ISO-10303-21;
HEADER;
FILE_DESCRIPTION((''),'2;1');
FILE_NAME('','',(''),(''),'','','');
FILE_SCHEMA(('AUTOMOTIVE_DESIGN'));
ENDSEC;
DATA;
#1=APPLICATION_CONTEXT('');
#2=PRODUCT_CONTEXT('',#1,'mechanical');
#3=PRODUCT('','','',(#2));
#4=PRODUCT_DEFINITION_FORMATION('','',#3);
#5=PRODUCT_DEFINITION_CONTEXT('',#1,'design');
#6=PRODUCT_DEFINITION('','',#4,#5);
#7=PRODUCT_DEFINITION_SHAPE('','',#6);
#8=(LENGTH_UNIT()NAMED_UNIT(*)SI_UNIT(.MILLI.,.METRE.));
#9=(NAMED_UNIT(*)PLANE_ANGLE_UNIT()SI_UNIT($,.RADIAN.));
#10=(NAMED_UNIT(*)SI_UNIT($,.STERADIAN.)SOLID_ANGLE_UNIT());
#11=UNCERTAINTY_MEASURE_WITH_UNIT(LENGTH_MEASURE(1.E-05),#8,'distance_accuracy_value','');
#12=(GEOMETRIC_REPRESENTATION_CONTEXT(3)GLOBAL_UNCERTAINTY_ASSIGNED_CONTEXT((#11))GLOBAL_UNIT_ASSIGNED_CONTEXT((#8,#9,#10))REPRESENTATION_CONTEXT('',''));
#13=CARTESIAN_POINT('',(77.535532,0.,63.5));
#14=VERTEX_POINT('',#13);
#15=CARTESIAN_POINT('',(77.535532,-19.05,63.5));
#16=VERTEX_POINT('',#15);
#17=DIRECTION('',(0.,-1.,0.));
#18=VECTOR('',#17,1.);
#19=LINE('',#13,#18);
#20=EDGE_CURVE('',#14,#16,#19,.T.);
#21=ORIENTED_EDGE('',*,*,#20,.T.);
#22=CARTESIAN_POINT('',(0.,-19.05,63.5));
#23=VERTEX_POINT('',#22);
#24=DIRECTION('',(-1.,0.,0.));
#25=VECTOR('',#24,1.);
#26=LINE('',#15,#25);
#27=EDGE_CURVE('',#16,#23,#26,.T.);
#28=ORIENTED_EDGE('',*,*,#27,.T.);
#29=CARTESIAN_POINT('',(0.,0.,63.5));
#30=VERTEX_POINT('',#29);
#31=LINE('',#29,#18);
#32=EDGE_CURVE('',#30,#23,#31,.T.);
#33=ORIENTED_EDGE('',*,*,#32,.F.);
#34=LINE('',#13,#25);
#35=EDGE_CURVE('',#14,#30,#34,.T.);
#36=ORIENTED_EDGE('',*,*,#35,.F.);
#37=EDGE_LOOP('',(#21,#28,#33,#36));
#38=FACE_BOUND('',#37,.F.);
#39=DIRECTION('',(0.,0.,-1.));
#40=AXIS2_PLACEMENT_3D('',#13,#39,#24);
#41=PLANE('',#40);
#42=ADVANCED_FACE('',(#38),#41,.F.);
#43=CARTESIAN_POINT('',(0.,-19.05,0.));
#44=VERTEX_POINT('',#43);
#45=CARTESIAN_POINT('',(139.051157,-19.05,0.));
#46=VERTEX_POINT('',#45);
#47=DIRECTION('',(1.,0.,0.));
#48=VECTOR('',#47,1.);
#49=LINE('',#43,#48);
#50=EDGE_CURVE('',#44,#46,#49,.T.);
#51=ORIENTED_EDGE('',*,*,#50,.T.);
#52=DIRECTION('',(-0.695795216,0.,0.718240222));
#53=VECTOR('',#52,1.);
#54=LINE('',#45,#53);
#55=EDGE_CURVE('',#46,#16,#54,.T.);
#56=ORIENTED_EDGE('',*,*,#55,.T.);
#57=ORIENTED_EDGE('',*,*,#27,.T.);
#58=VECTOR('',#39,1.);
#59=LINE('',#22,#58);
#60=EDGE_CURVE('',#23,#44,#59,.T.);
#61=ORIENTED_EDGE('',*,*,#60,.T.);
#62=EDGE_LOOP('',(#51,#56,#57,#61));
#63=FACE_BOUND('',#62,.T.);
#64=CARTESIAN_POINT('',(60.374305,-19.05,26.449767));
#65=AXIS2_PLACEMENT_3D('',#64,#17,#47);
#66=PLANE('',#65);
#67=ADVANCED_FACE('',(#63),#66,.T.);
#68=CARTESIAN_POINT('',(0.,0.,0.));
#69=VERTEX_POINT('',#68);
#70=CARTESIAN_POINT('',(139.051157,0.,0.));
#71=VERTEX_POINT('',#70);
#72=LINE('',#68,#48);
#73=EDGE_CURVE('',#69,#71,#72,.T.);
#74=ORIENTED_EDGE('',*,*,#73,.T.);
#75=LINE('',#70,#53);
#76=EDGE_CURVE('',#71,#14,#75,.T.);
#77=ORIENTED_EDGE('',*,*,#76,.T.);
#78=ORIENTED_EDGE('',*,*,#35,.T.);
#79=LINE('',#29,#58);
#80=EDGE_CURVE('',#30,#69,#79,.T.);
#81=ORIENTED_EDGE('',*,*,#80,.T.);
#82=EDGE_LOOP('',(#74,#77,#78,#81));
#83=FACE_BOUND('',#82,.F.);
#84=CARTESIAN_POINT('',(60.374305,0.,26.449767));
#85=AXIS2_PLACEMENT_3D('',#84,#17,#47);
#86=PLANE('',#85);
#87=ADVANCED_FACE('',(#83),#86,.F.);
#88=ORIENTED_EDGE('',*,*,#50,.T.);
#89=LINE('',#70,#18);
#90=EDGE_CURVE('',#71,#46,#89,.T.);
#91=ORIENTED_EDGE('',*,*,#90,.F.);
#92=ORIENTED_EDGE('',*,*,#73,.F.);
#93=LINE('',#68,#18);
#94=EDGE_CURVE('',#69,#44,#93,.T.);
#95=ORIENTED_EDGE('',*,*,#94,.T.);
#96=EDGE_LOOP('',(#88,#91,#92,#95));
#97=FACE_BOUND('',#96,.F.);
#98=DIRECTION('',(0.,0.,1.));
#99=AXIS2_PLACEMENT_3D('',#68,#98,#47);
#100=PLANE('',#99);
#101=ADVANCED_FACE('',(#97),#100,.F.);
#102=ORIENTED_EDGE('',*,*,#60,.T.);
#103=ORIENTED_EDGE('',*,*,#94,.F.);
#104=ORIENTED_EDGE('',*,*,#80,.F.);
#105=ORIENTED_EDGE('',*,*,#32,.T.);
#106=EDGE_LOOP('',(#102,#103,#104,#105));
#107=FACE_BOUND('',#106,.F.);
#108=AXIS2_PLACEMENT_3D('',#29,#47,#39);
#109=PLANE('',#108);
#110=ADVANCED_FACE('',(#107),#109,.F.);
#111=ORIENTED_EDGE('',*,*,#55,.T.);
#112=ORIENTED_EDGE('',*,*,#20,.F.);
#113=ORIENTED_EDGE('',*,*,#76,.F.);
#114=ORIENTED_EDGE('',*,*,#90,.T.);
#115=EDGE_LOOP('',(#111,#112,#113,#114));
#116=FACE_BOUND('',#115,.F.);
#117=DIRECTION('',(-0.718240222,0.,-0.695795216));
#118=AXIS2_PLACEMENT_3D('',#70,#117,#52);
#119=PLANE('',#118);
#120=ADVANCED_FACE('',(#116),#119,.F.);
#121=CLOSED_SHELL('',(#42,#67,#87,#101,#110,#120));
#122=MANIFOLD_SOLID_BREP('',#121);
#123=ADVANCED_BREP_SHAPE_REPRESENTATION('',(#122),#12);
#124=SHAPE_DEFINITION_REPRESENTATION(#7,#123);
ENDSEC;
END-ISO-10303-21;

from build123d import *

# Parameters (mm, degrees)
F1_DEPTH = 19.05


# Not quite as in the source:
# - a feature names something its author has since deleted; it is built from what else it names


with BuildPart() as f1:
    # F0 (on Front) → F1 (new body)
    with BuildSketch(Plane.XZ):
        Polygon((77.535532, 63.5), (0, 63.5), (0, 0), (139.0511571057, 0), align=None)
    extrude(amount=F1_DEPTH)


solid = f1.part
